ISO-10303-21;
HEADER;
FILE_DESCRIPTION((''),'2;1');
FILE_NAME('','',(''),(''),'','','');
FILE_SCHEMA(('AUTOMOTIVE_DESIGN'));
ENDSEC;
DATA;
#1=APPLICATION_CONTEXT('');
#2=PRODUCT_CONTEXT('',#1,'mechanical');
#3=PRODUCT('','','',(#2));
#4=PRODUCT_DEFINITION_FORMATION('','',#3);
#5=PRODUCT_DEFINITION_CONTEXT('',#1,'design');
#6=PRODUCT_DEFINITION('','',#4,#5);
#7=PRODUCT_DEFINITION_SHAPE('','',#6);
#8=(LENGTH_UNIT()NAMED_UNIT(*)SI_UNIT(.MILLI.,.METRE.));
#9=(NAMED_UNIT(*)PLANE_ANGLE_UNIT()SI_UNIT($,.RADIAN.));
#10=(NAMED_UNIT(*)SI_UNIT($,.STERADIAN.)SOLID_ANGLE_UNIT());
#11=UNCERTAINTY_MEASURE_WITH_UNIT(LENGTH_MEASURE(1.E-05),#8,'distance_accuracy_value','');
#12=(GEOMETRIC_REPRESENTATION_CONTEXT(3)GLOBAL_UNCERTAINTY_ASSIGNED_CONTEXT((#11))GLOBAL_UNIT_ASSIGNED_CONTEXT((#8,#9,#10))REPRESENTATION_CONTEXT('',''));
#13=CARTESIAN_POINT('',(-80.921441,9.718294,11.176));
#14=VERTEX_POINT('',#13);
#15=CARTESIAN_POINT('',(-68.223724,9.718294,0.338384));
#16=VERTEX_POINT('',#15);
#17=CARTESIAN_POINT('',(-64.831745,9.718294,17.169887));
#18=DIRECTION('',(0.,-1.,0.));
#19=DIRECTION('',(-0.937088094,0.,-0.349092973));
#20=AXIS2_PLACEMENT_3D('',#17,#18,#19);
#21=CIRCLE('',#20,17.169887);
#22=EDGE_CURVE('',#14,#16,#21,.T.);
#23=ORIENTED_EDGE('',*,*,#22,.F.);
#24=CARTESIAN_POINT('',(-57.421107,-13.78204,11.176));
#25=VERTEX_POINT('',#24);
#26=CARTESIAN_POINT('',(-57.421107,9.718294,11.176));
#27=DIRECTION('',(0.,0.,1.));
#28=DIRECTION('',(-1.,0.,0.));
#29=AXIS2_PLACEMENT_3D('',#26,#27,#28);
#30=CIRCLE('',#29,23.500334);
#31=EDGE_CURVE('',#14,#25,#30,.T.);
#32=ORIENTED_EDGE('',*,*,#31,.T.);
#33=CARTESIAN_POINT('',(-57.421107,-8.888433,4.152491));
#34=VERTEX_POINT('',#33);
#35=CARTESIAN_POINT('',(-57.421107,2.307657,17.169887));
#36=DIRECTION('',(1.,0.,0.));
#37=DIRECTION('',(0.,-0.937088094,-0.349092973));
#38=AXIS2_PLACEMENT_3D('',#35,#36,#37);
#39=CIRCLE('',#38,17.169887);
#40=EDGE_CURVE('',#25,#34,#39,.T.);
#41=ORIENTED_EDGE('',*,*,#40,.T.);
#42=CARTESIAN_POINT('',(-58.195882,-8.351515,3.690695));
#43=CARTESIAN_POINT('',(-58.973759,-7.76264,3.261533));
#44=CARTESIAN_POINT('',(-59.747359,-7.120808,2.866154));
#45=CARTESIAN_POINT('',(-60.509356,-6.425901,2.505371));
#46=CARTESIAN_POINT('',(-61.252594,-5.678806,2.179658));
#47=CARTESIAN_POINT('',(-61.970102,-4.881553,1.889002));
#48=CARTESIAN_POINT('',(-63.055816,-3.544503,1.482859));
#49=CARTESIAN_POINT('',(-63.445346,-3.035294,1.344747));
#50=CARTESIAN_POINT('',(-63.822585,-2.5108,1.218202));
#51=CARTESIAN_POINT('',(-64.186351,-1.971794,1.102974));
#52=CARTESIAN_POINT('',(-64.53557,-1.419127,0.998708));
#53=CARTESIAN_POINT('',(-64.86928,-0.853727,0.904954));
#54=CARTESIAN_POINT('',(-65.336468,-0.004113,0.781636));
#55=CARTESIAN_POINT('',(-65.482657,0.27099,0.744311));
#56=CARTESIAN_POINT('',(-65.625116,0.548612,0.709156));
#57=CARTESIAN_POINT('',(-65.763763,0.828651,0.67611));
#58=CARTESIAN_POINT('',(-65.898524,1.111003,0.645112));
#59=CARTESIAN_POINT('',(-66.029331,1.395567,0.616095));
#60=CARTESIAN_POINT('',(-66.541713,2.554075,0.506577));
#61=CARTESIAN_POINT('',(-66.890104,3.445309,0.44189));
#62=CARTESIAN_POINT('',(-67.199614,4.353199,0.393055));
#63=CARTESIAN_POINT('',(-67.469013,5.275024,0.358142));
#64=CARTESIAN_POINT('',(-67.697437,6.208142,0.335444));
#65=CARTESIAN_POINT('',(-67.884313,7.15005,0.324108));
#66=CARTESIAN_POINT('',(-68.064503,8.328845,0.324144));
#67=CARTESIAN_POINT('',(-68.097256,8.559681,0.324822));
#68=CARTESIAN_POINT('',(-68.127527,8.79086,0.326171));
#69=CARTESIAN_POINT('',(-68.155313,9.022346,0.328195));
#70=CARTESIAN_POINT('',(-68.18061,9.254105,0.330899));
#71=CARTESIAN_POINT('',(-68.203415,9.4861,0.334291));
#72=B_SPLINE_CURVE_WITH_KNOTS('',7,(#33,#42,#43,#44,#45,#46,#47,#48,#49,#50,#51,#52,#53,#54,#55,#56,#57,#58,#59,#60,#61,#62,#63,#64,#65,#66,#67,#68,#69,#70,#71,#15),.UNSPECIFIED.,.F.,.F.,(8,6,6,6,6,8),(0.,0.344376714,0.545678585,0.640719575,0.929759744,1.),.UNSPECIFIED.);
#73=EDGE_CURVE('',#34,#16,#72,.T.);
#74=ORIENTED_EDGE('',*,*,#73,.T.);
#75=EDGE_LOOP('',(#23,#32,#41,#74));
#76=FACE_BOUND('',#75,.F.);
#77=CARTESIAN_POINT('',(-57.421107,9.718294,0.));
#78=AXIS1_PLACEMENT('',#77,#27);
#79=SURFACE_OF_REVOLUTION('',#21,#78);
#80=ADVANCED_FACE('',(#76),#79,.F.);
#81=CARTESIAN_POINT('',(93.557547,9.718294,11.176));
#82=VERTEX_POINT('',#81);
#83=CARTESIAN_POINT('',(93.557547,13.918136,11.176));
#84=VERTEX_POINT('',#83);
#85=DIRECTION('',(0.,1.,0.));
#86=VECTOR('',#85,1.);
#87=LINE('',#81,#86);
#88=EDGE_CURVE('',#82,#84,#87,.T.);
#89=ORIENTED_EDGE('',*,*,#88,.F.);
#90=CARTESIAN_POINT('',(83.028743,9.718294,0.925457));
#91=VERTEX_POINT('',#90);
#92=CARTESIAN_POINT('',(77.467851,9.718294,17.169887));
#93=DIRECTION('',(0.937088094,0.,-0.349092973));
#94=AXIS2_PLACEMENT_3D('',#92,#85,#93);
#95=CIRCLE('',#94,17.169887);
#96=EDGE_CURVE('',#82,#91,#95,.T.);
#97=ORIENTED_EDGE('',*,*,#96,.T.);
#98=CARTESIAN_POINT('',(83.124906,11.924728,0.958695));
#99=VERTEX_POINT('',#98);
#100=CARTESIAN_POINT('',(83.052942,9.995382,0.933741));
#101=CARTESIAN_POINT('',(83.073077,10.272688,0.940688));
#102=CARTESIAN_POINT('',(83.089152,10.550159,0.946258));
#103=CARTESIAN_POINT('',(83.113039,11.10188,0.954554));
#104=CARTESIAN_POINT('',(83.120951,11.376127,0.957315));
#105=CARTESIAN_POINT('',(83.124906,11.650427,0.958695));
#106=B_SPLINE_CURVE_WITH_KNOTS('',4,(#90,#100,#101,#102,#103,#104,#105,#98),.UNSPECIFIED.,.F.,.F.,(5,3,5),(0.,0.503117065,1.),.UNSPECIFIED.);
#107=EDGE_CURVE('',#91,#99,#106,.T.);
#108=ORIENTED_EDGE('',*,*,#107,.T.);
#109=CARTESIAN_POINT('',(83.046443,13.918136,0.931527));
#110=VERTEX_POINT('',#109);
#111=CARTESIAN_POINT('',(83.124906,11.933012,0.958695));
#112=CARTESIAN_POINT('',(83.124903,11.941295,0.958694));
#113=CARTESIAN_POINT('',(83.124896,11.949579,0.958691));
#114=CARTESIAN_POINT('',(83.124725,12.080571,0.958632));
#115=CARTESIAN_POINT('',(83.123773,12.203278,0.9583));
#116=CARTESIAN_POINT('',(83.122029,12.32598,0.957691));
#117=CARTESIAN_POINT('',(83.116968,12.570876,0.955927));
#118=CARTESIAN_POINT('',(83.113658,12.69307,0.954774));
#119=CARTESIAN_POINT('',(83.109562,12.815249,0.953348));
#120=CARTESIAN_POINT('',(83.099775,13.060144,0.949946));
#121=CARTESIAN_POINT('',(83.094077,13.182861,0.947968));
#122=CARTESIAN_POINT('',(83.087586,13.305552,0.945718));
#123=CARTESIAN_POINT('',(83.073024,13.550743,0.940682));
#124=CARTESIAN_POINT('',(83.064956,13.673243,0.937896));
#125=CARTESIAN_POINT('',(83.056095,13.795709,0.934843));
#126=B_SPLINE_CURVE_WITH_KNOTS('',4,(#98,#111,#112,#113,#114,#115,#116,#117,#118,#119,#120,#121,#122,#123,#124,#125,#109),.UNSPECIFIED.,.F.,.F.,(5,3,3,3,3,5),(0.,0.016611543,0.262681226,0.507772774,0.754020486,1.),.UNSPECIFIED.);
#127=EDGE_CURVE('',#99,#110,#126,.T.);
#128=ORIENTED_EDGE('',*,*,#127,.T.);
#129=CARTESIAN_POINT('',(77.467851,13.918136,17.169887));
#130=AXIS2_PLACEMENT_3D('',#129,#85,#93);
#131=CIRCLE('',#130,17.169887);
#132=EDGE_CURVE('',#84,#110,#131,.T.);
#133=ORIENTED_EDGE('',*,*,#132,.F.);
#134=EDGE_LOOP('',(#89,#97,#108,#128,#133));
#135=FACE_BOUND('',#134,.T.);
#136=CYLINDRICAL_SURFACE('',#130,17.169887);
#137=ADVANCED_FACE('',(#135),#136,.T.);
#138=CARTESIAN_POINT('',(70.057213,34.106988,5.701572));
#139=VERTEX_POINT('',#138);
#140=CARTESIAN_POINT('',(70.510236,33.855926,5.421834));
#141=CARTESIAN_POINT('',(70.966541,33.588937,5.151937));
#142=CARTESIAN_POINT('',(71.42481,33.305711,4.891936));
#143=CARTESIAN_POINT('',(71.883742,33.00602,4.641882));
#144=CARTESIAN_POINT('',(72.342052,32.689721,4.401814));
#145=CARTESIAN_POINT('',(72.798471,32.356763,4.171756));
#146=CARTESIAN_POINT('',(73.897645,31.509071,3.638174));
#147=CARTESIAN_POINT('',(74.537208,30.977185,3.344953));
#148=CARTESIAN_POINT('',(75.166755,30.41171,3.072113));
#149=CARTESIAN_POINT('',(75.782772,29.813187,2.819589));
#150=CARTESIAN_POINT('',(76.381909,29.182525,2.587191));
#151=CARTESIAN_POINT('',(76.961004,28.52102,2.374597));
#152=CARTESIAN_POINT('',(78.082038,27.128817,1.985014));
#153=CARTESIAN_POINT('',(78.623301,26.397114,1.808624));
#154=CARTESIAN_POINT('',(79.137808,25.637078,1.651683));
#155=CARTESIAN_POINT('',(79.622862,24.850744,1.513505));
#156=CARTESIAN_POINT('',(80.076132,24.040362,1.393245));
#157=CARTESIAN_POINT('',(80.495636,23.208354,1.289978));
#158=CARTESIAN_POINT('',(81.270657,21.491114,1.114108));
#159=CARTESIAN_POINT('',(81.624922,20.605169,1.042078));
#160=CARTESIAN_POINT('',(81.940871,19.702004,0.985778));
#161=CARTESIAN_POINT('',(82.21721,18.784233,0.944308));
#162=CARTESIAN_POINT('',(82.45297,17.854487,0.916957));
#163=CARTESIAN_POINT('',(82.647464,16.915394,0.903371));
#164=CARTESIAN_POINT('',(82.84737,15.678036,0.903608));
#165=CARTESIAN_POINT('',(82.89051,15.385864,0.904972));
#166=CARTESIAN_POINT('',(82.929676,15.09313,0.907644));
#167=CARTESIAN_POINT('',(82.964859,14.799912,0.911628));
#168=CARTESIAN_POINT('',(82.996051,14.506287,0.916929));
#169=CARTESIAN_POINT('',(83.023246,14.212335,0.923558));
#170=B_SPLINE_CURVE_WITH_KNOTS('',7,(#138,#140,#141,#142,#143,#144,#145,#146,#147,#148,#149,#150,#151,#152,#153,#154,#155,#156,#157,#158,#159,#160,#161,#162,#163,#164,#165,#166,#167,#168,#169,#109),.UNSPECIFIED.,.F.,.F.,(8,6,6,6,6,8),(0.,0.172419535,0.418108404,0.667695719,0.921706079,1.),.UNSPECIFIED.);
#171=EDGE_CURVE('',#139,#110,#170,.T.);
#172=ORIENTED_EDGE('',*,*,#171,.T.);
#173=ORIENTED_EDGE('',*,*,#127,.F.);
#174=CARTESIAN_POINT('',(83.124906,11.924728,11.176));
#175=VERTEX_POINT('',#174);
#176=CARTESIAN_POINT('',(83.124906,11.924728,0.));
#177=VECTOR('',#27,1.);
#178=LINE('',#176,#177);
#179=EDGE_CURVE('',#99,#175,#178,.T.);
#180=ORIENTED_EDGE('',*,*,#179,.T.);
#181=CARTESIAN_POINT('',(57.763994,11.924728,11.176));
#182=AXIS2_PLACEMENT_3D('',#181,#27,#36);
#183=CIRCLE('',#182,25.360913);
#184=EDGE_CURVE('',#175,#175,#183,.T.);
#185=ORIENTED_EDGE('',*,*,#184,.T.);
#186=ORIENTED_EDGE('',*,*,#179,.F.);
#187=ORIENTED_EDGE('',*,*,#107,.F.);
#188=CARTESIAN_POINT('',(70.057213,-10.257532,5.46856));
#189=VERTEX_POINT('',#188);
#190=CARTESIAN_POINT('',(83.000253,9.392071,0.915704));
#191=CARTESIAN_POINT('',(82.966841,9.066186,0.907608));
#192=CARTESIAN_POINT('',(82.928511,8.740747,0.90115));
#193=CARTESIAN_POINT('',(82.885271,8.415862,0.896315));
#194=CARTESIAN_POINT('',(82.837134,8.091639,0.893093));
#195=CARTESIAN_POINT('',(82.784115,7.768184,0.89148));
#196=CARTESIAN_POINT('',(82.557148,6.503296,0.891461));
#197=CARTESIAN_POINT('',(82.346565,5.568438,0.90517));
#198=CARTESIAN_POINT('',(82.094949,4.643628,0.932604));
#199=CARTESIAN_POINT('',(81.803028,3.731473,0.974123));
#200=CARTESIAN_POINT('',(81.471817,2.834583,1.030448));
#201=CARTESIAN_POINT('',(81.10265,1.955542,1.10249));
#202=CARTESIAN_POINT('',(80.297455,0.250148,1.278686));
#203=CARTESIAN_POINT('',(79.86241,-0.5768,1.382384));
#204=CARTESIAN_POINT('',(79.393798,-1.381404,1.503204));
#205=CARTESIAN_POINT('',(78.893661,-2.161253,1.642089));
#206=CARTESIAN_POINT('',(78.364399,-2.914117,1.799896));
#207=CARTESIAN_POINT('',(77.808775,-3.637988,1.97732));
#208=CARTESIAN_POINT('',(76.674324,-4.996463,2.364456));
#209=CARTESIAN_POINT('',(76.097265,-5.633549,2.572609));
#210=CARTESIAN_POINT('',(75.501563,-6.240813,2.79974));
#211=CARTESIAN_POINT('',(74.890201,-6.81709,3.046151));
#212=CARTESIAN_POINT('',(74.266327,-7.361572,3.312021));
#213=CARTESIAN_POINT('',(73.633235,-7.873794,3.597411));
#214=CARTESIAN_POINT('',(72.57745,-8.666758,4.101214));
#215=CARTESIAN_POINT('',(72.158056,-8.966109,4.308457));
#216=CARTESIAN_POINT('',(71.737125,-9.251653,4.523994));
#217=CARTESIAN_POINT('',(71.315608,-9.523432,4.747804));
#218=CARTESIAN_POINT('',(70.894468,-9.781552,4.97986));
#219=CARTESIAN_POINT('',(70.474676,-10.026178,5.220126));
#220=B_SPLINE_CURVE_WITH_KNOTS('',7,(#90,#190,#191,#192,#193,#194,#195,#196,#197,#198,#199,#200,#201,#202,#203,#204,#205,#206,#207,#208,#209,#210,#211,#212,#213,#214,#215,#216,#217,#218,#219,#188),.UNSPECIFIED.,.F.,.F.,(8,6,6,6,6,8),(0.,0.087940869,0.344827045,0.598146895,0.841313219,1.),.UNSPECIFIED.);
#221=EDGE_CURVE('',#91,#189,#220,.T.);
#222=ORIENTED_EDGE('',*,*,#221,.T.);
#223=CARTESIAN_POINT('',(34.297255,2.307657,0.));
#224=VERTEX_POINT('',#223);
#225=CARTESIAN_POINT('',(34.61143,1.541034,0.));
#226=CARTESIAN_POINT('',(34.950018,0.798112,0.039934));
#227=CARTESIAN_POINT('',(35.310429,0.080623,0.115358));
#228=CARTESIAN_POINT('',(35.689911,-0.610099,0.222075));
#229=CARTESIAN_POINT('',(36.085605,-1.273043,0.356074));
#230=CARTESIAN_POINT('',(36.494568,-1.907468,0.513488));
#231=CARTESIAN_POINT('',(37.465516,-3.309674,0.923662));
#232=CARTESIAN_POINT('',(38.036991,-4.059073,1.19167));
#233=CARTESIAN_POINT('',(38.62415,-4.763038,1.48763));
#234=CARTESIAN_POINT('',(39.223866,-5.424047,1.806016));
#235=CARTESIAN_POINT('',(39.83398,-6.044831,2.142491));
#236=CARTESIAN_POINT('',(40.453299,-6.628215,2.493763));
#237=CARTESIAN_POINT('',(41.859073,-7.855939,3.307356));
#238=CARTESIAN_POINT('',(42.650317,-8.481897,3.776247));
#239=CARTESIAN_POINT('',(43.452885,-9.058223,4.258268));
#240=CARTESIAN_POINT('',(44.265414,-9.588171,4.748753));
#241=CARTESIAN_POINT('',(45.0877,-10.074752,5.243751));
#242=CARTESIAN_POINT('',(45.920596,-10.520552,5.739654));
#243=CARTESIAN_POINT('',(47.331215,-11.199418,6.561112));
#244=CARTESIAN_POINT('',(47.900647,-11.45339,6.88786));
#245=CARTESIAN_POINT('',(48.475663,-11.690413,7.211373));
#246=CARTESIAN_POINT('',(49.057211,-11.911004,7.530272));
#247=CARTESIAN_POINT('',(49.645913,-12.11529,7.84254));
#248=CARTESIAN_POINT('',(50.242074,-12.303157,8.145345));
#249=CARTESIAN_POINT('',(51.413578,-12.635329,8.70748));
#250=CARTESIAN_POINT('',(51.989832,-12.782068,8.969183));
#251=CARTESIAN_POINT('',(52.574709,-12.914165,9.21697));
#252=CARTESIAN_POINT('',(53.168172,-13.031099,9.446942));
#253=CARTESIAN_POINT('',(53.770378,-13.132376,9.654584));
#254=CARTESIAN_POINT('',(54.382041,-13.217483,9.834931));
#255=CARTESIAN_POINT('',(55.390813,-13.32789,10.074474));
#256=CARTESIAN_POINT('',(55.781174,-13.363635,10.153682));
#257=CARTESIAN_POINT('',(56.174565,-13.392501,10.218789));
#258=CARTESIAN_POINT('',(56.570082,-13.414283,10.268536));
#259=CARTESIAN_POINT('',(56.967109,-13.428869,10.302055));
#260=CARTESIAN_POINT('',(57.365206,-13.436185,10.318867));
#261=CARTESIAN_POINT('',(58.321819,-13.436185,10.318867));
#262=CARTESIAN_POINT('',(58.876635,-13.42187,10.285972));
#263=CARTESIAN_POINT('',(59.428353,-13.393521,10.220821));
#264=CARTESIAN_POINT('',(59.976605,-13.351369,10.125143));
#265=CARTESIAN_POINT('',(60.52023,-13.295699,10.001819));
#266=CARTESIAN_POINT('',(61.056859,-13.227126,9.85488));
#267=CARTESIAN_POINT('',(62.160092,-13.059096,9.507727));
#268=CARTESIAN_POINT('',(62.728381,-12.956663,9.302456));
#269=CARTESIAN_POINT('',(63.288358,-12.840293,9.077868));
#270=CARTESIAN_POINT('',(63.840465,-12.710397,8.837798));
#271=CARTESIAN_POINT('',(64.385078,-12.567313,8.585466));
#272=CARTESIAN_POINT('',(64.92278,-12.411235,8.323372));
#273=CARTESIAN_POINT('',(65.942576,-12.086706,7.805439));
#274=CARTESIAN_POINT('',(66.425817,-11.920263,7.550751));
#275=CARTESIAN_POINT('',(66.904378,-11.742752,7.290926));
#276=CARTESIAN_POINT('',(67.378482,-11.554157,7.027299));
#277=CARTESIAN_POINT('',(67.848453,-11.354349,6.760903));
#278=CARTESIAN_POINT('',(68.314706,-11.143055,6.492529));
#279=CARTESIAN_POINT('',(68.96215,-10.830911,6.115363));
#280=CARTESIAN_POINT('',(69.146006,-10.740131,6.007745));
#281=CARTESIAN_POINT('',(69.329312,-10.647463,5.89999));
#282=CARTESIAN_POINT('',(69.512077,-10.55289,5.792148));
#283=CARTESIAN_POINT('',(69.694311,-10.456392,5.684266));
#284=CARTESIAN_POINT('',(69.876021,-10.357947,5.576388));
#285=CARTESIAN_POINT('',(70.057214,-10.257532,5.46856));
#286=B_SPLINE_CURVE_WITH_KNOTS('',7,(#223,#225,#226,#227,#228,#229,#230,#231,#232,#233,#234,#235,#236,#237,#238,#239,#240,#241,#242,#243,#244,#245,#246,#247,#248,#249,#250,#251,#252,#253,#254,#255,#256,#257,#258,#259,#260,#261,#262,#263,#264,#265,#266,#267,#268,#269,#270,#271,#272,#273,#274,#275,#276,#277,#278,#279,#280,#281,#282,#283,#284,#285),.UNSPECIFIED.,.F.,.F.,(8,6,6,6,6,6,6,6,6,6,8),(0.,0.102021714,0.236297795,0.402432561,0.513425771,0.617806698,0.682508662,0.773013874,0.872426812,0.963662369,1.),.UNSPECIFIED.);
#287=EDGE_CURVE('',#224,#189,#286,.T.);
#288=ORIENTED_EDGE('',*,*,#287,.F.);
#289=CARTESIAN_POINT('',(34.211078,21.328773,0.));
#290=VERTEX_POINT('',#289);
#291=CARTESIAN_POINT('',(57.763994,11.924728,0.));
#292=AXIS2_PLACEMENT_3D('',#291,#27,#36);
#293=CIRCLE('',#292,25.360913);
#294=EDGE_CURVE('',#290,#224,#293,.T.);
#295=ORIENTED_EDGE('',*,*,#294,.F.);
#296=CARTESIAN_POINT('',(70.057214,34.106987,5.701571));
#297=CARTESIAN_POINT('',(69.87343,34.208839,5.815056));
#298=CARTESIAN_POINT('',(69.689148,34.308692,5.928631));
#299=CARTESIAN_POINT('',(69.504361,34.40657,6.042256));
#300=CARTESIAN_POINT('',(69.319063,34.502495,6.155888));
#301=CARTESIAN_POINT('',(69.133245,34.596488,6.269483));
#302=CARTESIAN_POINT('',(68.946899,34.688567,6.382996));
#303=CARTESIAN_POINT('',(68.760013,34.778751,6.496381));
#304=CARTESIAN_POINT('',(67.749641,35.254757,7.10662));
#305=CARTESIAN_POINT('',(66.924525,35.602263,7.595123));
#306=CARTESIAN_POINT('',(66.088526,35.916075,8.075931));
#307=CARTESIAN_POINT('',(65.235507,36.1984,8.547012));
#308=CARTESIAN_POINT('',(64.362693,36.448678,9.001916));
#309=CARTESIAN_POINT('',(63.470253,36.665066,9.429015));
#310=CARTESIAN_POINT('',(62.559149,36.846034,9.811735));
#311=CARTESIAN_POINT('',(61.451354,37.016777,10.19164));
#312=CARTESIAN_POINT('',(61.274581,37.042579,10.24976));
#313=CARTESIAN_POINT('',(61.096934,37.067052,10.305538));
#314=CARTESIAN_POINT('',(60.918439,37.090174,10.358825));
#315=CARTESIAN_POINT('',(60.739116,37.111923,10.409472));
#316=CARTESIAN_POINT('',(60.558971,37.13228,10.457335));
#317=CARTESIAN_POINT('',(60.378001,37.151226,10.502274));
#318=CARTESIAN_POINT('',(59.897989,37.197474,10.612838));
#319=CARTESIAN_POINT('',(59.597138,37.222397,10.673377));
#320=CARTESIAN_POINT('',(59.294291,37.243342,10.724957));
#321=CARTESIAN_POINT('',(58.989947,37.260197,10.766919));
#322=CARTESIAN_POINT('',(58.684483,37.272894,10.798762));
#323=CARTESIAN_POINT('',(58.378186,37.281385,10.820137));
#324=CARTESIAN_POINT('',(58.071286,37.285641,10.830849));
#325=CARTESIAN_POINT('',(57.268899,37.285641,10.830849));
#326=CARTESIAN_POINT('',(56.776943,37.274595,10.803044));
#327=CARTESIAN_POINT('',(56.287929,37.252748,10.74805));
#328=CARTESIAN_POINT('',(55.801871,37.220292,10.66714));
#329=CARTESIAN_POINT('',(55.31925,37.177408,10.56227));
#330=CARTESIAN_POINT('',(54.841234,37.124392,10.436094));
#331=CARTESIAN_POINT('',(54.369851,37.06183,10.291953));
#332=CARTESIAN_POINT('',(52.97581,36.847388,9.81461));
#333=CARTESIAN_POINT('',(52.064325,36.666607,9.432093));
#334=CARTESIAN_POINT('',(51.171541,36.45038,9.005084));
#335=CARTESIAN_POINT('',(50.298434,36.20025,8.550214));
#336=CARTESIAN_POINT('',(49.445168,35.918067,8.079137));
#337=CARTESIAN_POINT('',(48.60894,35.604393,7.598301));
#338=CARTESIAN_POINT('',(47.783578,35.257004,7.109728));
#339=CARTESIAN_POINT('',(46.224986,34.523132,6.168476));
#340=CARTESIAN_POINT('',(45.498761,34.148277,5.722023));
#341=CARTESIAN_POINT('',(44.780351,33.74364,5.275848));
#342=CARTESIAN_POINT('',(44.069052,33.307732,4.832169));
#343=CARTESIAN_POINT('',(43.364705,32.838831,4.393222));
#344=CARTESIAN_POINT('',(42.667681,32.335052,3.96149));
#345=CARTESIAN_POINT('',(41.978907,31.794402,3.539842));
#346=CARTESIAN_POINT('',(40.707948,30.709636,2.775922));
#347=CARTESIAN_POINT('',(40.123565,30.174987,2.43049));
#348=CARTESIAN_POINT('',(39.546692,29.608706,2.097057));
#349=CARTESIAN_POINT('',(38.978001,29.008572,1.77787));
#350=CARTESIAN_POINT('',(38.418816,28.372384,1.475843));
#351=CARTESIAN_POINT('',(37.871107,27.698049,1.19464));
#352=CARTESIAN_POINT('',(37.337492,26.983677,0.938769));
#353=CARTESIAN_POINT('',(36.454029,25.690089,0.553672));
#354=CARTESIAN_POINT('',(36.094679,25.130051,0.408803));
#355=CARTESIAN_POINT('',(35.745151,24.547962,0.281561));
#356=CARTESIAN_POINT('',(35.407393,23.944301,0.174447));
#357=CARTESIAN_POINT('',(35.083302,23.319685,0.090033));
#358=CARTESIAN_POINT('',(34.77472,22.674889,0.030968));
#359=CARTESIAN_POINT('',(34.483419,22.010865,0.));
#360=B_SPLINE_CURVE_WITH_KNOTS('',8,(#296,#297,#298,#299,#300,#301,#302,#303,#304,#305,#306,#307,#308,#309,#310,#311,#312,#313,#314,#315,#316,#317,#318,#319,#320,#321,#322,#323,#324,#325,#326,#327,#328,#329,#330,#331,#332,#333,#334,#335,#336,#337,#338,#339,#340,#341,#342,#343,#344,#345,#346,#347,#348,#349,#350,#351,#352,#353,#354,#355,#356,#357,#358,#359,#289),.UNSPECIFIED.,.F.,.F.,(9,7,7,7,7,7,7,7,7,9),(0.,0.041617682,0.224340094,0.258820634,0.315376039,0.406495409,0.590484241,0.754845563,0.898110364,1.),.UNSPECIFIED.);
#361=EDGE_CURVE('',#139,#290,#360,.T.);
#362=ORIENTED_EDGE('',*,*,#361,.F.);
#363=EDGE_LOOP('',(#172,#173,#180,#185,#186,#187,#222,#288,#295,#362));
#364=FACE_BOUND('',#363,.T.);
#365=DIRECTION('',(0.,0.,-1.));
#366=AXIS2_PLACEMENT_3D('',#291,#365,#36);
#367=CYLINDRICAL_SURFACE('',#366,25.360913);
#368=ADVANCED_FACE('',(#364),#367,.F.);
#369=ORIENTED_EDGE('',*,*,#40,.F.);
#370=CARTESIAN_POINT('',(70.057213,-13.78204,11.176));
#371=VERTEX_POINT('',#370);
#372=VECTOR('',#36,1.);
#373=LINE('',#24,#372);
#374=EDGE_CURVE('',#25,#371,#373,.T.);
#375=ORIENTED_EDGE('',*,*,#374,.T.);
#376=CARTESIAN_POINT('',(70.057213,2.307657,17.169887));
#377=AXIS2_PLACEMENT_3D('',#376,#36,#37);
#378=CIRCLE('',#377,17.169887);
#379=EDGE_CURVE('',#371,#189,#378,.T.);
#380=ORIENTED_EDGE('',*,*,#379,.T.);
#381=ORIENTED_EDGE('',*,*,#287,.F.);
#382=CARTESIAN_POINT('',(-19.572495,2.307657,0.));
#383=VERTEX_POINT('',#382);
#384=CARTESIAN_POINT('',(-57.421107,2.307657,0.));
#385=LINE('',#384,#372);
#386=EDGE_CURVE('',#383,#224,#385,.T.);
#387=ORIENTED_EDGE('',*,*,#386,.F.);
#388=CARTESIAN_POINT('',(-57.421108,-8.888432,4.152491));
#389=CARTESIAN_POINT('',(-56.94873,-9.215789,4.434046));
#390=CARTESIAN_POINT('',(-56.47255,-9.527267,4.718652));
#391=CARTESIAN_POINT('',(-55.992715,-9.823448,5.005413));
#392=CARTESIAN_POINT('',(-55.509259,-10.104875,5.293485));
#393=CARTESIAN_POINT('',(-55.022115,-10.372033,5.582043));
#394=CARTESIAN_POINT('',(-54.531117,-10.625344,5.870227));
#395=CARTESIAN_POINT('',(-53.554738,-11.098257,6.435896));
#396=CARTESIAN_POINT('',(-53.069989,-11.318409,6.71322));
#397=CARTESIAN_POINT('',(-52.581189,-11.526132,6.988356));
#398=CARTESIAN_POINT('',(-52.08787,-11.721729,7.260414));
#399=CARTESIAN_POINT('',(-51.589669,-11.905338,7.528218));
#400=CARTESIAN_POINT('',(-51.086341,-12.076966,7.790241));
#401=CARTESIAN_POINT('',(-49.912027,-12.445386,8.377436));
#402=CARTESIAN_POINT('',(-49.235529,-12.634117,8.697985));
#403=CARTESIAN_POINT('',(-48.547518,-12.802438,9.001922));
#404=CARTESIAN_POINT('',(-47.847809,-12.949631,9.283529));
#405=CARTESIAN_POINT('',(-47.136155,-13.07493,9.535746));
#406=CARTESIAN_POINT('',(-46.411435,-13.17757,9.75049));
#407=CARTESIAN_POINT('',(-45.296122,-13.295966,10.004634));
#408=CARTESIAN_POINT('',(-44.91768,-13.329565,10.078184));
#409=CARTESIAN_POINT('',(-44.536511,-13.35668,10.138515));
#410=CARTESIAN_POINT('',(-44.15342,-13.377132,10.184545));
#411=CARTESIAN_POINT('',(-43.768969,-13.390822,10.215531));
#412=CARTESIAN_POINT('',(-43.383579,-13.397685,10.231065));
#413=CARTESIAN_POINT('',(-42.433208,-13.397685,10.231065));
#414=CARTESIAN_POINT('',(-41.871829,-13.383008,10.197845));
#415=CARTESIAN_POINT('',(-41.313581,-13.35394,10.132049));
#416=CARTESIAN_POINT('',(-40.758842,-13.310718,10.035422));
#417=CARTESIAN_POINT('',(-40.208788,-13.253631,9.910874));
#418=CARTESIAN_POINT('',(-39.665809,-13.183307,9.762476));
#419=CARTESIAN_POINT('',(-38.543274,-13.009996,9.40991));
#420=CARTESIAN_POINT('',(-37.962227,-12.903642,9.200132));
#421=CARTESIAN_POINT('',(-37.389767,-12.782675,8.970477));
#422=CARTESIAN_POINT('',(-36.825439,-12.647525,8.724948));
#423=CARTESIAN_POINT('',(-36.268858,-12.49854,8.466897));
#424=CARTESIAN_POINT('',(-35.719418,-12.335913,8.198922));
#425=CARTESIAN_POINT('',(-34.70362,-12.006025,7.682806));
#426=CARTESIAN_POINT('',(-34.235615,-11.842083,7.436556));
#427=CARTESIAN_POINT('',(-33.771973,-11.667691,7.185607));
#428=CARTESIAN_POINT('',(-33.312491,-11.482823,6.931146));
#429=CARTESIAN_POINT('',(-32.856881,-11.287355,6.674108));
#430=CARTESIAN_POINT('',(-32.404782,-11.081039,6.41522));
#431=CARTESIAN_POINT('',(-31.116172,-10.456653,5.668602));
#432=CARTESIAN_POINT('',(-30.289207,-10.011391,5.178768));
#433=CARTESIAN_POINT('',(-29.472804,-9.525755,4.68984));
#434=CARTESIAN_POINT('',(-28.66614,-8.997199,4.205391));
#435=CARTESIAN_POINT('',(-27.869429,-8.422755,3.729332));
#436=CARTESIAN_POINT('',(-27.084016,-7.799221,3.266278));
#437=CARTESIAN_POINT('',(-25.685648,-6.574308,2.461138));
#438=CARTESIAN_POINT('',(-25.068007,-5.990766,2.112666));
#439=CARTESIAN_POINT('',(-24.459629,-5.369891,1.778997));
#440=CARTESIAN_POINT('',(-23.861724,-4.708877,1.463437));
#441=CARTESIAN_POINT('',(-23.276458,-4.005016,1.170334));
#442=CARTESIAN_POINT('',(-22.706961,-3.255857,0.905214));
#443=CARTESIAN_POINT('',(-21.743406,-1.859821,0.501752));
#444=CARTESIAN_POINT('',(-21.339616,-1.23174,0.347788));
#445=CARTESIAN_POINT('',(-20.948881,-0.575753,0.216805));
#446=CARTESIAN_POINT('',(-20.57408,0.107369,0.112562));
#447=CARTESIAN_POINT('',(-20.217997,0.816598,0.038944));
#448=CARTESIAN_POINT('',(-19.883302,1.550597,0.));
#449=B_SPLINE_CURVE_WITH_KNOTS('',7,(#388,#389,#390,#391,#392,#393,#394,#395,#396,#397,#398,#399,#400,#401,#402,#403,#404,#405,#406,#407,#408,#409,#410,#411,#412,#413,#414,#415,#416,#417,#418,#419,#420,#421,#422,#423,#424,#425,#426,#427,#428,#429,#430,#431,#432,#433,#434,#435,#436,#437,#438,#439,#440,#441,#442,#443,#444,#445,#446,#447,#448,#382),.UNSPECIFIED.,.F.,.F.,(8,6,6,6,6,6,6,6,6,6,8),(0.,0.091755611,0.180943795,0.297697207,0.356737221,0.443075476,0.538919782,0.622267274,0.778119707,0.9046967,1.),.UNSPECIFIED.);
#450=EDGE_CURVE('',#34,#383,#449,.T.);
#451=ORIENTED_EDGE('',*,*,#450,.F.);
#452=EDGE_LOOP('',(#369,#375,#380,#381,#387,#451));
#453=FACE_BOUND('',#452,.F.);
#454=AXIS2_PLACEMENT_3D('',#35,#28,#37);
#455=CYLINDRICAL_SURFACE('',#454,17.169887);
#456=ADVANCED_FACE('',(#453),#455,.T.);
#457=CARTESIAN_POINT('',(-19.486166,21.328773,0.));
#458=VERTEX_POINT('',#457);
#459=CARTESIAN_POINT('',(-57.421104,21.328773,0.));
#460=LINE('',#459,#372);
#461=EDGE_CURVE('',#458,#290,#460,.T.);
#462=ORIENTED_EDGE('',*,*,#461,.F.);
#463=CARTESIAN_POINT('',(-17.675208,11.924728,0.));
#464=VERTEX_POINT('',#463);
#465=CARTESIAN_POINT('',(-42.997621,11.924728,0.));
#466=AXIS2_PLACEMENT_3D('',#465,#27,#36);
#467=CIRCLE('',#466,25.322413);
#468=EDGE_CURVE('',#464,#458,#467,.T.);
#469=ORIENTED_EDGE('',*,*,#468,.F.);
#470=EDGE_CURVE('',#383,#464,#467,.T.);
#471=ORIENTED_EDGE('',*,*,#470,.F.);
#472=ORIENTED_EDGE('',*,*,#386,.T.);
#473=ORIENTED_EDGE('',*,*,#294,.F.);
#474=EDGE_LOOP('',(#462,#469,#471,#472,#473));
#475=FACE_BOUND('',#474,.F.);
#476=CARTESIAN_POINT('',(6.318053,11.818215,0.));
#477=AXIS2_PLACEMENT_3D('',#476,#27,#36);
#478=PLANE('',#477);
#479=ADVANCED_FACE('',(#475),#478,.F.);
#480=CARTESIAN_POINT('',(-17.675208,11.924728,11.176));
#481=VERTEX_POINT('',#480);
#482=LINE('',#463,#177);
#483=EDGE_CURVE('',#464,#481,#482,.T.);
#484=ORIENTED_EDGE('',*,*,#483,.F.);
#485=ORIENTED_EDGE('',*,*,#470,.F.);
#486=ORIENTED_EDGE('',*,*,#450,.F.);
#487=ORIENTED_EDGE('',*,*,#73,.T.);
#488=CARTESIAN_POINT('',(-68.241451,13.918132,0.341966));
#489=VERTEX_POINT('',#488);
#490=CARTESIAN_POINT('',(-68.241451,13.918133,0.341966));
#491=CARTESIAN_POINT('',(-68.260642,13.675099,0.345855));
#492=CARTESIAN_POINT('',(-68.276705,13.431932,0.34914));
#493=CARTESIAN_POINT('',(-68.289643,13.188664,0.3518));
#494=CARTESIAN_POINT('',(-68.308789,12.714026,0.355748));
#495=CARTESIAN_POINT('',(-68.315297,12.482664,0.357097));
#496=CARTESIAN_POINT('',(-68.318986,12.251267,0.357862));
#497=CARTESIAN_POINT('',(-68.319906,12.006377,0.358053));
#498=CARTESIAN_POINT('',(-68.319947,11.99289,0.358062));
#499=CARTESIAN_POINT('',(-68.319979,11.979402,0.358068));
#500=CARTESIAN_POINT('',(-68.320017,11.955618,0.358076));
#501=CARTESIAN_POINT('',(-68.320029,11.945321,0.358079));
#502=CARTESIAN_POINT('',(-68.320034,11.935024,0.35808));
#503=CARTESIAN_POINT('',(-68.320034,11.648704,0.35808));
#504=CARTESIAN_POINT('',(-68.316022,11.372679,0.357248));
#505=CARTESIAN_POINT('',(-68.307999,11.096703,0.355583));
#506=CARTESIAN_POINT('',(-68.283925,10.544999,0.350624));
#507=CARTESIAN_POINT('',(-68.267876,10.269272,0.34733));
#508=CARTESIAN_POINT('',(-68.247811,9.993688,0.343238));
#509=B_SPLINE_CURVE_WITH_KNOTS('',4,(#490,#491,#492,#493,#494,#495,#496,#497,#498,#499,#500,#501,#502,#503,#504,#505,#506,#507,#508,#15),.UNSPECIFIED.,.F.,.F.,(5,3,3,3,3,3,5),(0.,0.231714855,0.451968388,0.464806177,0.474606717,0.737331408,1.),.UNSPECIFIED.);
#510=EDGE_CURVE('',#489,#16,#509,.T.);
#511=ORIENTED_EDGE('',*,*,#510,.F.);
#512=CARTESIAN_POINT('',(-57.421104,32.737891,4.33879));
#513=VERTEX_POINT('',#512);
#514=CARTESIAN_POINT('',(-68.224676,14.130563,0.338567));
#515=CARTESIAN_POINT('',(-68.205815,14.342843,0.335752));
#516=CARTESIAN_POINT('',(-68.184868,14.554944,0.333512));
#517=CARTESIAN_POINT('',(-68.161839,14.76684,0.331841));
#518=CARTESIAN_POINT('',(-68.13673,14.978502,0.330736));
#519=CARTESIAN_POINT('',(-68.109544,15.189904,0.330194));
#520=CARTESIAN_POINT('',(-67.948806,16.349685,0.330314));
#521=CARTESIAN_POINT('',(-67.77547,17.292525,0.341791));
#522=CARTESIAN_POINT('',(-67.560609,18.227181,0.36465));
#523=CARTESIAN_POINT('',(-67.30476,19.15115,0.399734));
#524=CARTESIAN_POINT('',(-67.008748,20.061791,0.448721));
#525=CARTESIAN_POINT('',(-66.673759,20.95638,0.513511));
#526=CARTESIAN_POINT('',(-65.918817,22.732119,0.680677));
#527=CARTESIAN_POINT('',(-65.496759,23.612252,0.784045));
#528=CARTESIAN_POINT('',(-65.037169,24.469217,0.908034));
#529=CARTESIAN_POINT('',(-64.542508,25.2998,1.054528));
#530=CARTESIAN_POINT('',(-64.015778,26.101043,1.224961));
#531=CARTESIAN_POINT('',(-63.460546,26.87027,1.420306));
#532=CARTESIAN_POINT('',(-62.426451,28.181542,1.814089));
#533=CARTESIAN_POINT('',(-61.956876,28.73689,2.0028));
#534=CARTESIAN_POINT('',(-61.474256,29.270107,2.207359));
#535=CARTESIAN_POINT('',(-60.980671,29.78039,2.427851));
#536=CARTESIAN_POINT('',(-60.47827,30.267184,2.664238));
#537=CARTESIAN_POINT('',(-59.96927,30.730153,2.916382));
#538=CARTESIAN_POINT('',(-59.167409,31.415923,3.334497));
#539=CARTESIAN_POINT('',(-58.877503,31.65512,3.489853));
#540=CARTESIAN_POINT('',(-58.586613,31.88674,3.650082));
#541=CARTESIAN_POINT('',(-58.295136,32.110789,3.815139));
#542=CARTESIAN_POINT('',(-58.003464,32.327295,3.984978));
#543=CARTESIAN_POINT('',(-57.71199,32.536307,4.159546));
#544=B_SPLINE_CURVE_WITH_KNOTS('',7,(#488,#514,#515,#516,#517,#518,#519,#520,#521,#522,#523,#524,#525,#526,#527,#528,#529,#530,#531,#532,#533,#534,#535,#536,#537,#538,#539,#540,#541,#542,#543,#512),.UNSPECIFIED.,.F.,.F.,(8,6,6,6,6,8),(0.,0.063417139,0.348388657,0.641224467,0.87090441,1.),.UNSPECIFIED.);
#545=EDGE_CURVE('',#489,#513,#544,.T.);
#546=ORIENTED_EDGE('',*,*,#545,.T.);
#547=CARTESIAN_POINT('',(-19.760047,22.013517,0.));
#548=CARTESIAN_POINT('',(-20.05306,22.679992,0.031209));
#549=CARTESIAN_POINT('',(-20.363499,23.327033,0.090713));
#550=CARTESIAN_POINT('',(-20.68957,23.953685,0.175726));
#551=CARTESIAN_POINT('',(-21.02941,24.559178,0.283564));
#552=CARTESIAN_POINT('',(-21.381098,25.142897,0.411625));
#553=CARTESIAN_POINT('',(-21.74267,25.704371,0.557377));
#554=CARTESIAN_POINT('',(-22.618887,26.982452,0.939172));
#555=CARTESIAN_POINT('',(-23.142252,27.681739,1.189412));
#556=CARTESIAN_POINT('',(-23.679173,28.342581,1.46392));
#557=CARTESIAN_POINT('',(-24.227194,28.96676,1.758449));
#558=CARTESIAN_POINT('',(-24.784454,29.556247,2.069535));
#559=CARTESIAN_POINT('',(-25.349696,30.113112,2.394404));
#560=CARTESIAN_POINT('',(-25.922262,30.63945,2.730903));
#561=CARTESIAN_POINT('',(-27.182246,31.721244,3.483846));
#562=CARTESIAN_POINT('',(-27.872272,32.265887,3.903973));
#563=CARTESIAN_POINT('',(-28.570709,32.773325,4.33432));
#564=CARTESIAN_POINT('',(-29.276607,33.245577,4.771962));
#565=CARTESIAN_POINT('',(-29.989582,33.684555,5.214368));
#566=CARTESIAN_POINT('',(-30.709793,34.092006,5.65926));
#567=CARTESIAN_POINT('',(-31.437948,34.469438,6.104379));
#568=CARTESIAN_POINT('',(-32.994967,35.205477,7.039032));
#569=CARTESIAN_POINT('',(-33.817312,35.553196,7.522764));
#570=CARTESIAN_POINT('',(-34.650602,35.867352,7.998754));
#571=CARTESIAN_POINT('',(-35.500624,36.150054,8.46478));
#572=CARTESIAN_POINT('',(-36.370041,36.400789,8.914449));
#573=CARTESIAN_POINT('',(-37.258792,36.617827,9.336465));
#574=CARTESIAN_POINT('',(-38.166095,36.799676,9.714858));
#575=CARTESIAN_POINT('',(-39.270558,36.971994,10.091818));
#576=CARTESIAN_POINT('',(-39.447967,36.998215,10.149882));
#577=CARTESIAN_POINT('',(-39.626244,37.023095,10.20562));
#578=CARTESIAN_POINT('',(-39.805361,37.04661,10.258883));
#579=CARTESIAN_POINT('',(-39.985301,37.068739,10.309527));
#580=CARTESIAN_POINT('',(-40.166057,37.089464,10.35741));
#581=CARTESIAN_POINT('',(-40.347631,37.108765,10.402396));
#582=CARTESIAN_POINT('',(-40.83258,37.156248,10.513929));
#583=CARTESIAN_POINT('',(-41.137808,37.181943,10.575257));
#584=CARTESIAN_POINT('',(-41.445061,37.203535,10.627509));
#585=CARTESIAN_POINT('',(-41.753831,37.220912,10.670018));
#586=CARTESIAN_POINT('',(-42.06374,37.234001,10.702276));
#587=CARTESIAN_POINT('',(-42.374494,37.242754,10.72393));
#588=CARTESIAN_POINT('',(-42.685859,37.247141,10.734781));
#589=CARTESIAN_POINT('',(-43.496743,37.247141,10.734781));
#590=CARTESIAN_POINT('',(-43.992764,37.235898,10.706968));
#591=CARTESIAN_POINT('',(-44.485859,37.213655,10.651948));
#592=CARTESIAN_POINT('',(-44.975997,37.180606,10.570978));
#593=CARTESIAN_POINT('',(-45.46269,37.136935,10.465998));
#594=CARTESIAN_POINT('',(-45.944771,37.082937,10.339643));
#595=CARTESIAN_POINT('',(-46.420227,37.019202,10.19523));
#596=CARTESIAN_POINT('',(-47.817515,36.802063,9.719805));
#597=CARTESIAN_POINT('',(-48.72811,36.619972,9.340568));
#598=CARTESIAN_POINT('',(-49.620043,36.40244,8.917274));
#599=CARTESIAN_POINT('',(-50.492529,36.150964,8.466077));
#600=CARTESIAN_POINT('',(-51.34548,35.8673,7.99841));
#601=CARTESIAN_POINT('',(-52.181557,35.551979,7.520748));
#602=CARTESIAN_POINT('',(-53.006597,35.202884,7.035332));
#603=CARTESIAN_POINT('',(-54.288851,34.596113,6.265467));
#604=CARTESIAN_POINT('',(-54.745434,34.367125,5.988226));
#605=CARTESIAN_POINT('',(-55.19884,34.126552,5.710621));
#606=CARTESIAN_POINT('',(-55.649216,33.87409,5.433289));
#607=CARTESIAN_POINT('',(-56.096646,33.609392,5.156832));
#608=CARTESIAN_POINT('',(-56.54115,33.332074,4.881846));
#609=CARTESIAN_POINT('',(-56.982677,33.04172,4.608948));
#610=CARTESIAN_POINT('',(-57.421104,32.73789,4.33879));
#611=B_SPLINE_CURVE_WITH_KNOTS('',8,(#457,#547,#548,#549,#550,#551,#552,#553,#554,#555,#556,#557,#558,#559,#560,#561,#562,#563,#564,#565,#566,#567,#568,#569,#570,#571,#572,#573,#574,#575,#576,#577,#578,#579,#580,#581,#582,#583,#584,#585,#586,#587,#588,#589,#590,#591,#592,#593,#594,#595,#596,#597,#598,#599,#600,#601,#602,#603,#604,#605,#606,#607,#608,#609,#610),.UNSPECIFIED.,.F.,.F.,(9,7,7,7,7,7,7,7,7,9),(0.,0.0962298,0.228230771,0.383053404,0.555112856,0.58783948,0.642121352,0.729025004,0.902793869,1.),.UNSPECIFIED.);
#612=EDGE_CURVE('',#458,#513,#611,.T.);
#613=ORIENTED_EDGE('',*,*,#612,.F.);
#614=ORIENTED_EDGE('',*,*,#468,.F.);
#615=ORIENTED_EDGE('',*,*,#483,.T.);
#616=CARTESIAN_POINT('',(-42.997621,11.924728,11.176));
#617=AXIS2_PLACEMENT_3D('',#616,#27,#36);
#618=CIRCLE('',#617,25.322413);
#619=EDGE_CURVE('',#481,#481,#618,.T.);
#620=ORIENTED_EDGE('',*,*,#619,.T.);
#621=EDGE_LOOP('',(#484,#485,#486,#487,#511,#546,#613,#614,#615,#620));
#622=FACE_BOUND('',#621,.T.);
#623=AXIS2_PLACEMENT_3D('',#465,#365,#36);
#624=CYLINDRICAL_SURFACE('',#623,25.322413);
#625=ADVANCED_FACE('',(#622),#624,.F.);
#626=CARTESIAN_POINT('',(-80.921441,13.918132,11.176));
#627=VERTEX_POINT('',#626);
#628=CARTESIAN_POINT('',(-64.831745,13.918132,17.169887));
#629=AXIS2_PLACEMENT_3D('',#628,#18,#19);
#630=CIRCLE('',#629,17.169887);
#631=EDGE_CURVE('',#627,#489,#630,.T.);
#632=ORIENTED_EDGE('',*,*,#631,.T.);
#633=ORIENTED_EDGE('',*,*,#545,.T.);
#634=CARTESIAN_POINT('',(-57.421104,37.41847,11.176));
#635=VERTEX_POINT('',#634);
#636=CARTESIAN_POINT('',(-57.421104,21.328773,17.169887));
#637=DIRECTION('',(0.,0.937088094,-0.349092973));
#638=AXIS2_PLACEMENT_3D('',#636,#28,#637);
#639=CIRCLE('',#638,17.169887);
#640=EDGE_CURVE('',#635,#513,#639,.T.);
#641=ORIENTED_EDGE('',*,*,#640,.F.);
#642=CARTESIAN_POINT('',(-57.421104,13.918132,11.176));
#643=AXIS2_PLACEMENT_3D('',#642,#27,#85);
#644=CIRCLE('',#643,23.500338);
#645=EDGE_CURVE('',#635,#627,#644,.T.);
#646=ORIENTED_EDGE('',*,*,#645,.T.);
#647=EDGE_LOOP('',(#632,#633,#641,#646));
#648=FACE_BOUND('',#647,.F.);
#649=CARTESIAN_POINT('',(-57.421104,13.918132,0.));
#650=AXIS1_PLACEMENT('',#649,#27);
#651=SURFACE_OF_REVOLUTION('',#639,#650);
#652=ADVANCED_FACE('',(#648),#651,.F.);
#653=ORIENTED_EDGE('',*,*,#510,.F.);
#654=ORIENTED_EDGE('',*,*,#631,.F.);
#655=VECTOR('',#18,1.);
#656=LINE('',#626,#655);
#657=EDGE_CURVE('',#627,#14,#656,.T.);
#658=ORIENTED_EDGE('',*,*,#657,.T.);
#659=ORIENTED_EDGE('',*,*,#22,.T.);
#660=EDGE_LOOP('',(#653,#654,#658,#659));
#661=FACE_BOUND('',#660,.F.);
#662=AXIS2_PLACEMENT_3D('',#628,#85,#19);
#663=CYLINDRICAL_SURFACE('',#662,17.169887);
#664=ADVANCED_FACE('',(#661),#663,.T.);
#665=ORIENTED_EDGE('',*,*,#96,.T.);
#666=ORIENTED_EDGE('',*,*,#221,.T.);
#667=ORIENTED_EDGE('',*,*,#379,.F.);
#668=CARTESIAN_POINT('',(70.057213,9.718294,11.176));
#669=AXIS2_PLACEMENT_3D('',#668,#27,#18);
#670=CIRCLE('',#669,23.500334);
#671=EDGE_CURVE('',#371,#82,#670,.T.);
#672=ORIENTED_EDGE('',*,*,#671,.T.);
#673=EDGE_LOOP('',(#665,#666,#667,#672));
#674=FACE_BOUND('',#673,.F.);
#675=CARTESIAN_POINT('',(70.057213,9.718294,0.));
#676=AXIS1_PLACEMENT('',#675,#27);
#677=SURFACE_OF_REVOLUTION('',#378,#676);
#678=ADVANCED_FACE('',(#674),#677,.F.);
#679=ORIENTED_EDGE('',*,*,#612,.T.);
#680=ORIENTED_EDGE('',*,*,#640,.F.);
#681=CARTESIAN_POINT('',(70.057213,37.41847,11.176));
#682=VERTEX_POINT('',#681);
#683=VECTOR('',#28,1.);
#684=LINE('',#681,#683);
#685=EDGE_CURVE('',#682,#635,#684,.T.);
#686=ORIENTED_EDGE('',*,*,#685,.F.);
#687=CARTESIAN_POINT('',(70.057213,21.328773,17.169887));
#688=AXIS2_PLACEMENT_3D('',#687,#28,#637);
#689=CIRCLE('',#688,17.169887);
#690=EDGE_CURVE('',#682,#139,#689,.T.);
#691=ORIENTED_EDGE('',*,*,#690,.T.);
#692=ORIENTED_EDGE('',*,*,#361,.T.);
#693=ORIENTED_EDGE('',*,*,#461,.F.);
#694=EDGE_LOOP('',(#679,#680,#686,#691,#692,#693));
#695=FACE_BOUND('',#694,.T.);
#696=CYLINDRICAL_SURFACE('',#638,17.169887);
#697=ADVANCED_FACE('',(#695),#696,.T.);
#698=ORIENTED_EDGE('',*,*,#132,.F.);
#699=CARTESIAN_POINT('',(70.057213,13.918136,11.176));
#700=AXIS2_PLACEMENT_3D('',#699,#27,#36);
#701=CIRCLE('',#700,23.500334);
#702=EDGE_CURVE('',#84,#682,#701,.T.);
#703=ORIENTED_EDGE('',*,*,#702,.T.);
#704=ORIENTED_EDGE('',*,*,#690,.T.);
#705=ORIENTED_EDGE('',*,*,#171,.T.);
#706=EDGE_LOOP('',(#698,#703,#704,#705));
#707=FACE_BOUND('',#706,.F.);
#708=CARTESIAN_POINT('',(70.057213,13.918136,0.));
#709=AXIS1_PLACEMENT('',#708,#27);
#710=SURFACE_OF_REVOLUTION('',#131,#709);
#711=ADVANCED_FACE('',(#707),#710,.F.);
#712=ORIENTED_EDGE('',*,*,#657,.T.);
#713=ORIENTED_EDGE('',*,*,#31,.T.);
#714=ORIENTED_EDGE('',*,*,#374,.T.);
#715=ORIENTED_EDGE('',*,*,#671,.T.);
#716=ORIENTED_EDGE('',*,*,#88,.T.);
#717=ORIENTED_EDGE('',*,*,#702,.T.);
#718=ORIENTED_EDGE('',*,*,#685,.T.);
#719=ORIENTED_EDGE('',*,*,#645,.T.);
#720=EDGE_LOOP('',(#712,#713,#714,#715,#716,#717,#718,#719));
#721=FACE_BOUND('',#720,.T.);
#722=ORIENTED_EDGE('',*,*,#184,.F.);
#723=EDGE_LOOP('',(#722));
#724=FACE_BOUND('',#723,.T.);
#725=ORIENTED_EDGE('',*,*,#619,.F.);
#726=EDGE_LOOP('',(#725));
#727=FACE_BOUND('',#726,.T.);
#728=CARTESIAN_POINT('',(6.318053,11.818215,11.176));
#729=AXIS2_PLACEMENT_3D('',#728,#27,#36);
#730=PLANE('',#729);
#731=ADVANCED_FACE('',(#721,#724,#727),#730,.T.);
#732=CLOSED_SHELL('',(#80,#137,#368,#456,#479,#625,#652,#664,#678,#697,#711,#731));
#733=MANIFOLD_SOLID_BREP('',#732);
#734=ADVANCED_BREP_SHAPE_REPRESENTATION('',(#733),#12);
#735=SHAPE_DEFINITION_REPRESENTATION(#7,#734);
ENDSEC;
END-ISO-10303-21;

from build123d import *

# Parameters (mm, degrees)
F0_R         = 25.3224131448
F0_R_2       = 25.3609127301
F1_DEPTH     = 11.176
F2_T1_DEPTH  = 4.1998379789
F2_T3_DEPTH  = 127.4783204379
F2_T5_DEPTH  = 4.1998416744
F2_T7_DEPTH  = 127.4783167424
F2_T10_ANGLE = 90
F2_T12_ANGLE = 90
F2_T14_ANGLE = 90
F2_T16_ANGLE = 90


# Not quite as in the source:
# - a fillet or chamfer that OpenCascade refuses, or shapes differently, is made with other operations: its cross-section is extruded or revolved along the edge and cut away or added


with BuildPart() as f1:
    # F0 (on Top) → F1 (new body)
    with BuildSketch(Plane.XY):
        with BuildLine():
            Line((70.0572131213, 37.4184697866), (-57.4211036211, 37.4184697866))
            ThreePointArc((-57.4211036211, 37.4184697866), (-74.0383517658, 30.5353802358), (-80.9214413166, 13.9181320912))
            Line((-80.9214413166, 13.9181320912), (-80.9214413166, 9.7182941123))
            ThreePointArc((-80.9214413166, 9.7182941123), (-74.0383528482, -6.8989514193), (-57.4211073166, -13.7820398877))
            Line((-57.4211073166, -13.7820398877), (70.0572131213, -13.7820398877))
            ThreePointArc((70.0572131213, -13.7820398877), (86.6744586529, -6.8989514193), (93.5575471213, 9.7182941123))
            Line((93.5575471213, 9.7182941123), (93.5575471213, 13.9181357866))
            ThreePointArc((93.5575471213, 13.9181357866), (86.6744586529, 30.5353813182), (70.0572131213, 37.4184697866))
        make_face()
        with Locations((-42.9976209998, 11.9247278199)):
            Circle(F0_R, mode=Mode.SUBTRACT)
        with Locations((57.7639937401, 11.9247278199)):
            Circle(F0_R_2, mode=Mode.SUBTRACT)
    extrude(amount=F1_DEPTH)

    # F2: fillet of radius 17.1698868556 on 1 edges, made by hand

    # F2_s2 → F2_t1 (cut)
    with BuildSketch(Plane.XZ.offset(-13.9181320912)):
        with BuildLine():
            ThreePointArc((-80.9214413166, 11.176), (-74.6269133611, 3.0681250194), (-64.8317447689, 0))
            Line((-64.8317447689, 0), (-64.8317447689, -0.3433977371))
            Line((-64.8317447689, -0.3433977371), (-80.9214413166, -0.3433977371))
            Line((-80.9214413166, -0.3433977371), (-81.2648390537, 0))
            ThreePointArc((-81.2648390537, 0), (-81.2648390537, 5.588), (-81.2432352476, 11.0561222629))
            Line((-81.2432352476, 11.0561222629), (-80.9214413166, 11.176))
        make_face()
    extrude(amount=F2_T1_DEPTH, mode=Mode.SUBTRACT)

    # F2_s4 → F2_t3 (cut)
    with BuildSketch(Plane.YZ.offset(-57.4211073166)):
        with BuildLine():
            ThreePointArc((-13.7820398877, 11.176), (-7.4875119322, 3.0681250194), (2.3076566599, 0))
            Line((2.3076566599, 0), (2.3076566599, -0.3433977371))
            Line((2.3076566599, -0.3433977371), (-13.7820398877, -0.3433977371))
            Line((-13.7820398877, -0.3433977371), (-14.1254376248, 0))
            ThreePointArc((-14.1254376248, 0), (-14.1254376248, 5.588), (-14.1038338187, 11.0561222629))
            Line((-14.1038338187, 11.0561222629), (-13.7820398877, 11.176))
        make_face()
    extrude(amount=F2_T3_DEPTH, mode=Mode.SUBTRACT)

    # F2_s6 → F2_t5 (cut)
    with BuildSketch(Plane.XZ.offset(-13.9181357866)):
        with BuildLine():
            ThreePointArc((93.5575471213, 11.176), (87.2630191658, 3.0681250194), (77.4678505736, 0))
            Line((77.4678505736, 0), (77.4678505736, -0.3433977371))
            Line((77.4678505736, -0.3433977371), (93.5575471213, -0.3433977371))
            Line((93.5575471213, -0.3433977371), (93.9009448584, 0))
            ThreePointArc((93.9009448584, 0), (93.9009448584, 5.588), (93.8793410523, 11.0561222629))
            Line((93.8793410523, 11.0561222629), (93.5575471213, 11.176))
        make_face()
    extrude(amount=F2_T5_DEPTH, mode=Mode.SUBTRACT)

    # F2_s8 → F2_t7 (cut)
    with BuildSketch(Plane.YZ.offset(-57.4211036211)):
        with BuildLine():
            ThreePointArc((37.4184697866, 11.176), (31.1239418311, 3.0681250194), (21.328773239, 0))
            Line((21.328773239, 0), (21.328773239, -0.3433977371))
            Line((21.328773239, -0.3433977371), (37.4184697866, -0.3433977371))
            Line((37.4184697866, -0.3433977371), (37.7618675238, 0))
            ThreePointArc((37.7618675238, 0), (37.7618675238, 5.588), (37.7402637176, 11.0561222629))
            Line((37.7402637176, 11.0561222629), (37.4184697866, 11.176))
        make_face()
    extrude(amount=F2_T7_DEPTH, mode=Mode.SUBTRACT)

    # F2_s9 → F2_t10 (revolve, cut)
    with BuildSketch(Plane.XZ.offset(-9.7182941123)):
        with BuildLine():
            ThreePointArc((-80.9214413166, 11.176), (-74.6269133611, 3.0681250194), (-64.8317447689, 0))
            Line((-64.8317447689, 0), (-64.8317447689, -0.3433977371))
            Line((-64.8317447689, -0.3433977371), (-80.9214413166, -0.3433977371))
            Line((-80.9214413166, -0.3433977371), (-81.2648390537, 0))
            ThreePointArc((-81.2648390537, 0), (-81.2648390537, 5.588), (-81.2432352476, 11.0561222629))
            Line((-81.2432352476, 11.0561222629), (-80.9214413166, 11.176))
        make_face()
    revolve(axis=Axis((-57.4211073166, 9.7182941123, 0), (0, 0, 1)), revolution_arc=F2_T10_ANGLE, mode=Mode.SUBTRACT)

    # F2_s11 → F2_t12 (revolve, cut)
    with BuildSketch(Plane.YZ.offset(70.0572131213)):
        with BuildLine():
            ThreePointArc((-13.7820398877, 11.176), (-7.4875119322, 3.0681250194), (2.3076566599, 0))
            Line((2.3076566599, 0), (2.3076566599, -0.3433977371))
            Line((2.3076566599, -0.3433977371), (-13.7820398877, -0.3433977371))
            Line((-13.7820398877, -0.3433977371), (-14.1254376248, 0))
            ThreePointArc((-14.1254376248, 0), (-14.1254376248, 5.588), (-14.1038338187, 11.0561222629))
            Line((-14.1038338187, 11.0561222629), (-13.7820398877, 11.176))
        make_face()
    revolve(axis=Axis((70.0572131213, 9.7182941123, 0), (0, 0, 1)), revolution_arc=F2_T12_ANGLE, mode=Mode.SUBTRACT)

    # F2_s13 → F2_t14 (revolve, cut)
    with BuildSketch(Plane.XZ.offset(-13.9181357866)):
        with BuildLine():
            ThreePointArc((93.5575471213, 11.176), (87.2630191658, 3.0681250194), (77.4678505736, 0))
            Line((77.4678505736, 0), (77.4678505736, -0.3433977371))
            Line((77.4678505736, -0.3433977371), (93.5575471213, -0.3433977371))
            Line((93.5575471213, -0.3433977371), (93.9009448584, 0))
            ThreePointArc((93.9009448584, 0), (93.9009448584, 5.588), (93.8793410523, 11.0561222629))
            Line((93.8793410523, 11.0561222629), (93.5575471213, 11.176))
        make_face()
    revolve(axis=Axis((70.0572131213, 13.9181357866, 0), (0, 0, 1)), revolution_arc=F2_T14_ANGLE, mode=Mode.SUBTRACT)

    # F2_s15 → F2_t16 (revolve, cut)
    with BuildSketch(Plane.YZ.offset(-57.4211036211)):
        with BuildLine():
            ThreePointArc((37.4184697866, 11.176), (31.1239418311, 3.0681250194), (21.328773239, 0))
            Line((21.328773239, 0), (21.328773239, -0.3433977371))
            Line((21.328773239, -0.3433977371), (37.4184697866, -0.3433977371))
            Line((37.4184697866, -0.3433977371), (37.7618675238, 0))
            ThreePointArc((37.7618675238, 0), (37.7618675238, 5.588), (37.7402637176, 11.0561222629))
            Line((37.7402637176, 11.0561222629), (37.4184697866, 11.176))
        make_face()
    revolve(axis=Axis((-57.4211036211, 13.9181320912, 0), (0, 0, 1)), revolution_arc=F2_T16_ANGLE, mode=Mode.SUBTRACT)


solid = f1.part
